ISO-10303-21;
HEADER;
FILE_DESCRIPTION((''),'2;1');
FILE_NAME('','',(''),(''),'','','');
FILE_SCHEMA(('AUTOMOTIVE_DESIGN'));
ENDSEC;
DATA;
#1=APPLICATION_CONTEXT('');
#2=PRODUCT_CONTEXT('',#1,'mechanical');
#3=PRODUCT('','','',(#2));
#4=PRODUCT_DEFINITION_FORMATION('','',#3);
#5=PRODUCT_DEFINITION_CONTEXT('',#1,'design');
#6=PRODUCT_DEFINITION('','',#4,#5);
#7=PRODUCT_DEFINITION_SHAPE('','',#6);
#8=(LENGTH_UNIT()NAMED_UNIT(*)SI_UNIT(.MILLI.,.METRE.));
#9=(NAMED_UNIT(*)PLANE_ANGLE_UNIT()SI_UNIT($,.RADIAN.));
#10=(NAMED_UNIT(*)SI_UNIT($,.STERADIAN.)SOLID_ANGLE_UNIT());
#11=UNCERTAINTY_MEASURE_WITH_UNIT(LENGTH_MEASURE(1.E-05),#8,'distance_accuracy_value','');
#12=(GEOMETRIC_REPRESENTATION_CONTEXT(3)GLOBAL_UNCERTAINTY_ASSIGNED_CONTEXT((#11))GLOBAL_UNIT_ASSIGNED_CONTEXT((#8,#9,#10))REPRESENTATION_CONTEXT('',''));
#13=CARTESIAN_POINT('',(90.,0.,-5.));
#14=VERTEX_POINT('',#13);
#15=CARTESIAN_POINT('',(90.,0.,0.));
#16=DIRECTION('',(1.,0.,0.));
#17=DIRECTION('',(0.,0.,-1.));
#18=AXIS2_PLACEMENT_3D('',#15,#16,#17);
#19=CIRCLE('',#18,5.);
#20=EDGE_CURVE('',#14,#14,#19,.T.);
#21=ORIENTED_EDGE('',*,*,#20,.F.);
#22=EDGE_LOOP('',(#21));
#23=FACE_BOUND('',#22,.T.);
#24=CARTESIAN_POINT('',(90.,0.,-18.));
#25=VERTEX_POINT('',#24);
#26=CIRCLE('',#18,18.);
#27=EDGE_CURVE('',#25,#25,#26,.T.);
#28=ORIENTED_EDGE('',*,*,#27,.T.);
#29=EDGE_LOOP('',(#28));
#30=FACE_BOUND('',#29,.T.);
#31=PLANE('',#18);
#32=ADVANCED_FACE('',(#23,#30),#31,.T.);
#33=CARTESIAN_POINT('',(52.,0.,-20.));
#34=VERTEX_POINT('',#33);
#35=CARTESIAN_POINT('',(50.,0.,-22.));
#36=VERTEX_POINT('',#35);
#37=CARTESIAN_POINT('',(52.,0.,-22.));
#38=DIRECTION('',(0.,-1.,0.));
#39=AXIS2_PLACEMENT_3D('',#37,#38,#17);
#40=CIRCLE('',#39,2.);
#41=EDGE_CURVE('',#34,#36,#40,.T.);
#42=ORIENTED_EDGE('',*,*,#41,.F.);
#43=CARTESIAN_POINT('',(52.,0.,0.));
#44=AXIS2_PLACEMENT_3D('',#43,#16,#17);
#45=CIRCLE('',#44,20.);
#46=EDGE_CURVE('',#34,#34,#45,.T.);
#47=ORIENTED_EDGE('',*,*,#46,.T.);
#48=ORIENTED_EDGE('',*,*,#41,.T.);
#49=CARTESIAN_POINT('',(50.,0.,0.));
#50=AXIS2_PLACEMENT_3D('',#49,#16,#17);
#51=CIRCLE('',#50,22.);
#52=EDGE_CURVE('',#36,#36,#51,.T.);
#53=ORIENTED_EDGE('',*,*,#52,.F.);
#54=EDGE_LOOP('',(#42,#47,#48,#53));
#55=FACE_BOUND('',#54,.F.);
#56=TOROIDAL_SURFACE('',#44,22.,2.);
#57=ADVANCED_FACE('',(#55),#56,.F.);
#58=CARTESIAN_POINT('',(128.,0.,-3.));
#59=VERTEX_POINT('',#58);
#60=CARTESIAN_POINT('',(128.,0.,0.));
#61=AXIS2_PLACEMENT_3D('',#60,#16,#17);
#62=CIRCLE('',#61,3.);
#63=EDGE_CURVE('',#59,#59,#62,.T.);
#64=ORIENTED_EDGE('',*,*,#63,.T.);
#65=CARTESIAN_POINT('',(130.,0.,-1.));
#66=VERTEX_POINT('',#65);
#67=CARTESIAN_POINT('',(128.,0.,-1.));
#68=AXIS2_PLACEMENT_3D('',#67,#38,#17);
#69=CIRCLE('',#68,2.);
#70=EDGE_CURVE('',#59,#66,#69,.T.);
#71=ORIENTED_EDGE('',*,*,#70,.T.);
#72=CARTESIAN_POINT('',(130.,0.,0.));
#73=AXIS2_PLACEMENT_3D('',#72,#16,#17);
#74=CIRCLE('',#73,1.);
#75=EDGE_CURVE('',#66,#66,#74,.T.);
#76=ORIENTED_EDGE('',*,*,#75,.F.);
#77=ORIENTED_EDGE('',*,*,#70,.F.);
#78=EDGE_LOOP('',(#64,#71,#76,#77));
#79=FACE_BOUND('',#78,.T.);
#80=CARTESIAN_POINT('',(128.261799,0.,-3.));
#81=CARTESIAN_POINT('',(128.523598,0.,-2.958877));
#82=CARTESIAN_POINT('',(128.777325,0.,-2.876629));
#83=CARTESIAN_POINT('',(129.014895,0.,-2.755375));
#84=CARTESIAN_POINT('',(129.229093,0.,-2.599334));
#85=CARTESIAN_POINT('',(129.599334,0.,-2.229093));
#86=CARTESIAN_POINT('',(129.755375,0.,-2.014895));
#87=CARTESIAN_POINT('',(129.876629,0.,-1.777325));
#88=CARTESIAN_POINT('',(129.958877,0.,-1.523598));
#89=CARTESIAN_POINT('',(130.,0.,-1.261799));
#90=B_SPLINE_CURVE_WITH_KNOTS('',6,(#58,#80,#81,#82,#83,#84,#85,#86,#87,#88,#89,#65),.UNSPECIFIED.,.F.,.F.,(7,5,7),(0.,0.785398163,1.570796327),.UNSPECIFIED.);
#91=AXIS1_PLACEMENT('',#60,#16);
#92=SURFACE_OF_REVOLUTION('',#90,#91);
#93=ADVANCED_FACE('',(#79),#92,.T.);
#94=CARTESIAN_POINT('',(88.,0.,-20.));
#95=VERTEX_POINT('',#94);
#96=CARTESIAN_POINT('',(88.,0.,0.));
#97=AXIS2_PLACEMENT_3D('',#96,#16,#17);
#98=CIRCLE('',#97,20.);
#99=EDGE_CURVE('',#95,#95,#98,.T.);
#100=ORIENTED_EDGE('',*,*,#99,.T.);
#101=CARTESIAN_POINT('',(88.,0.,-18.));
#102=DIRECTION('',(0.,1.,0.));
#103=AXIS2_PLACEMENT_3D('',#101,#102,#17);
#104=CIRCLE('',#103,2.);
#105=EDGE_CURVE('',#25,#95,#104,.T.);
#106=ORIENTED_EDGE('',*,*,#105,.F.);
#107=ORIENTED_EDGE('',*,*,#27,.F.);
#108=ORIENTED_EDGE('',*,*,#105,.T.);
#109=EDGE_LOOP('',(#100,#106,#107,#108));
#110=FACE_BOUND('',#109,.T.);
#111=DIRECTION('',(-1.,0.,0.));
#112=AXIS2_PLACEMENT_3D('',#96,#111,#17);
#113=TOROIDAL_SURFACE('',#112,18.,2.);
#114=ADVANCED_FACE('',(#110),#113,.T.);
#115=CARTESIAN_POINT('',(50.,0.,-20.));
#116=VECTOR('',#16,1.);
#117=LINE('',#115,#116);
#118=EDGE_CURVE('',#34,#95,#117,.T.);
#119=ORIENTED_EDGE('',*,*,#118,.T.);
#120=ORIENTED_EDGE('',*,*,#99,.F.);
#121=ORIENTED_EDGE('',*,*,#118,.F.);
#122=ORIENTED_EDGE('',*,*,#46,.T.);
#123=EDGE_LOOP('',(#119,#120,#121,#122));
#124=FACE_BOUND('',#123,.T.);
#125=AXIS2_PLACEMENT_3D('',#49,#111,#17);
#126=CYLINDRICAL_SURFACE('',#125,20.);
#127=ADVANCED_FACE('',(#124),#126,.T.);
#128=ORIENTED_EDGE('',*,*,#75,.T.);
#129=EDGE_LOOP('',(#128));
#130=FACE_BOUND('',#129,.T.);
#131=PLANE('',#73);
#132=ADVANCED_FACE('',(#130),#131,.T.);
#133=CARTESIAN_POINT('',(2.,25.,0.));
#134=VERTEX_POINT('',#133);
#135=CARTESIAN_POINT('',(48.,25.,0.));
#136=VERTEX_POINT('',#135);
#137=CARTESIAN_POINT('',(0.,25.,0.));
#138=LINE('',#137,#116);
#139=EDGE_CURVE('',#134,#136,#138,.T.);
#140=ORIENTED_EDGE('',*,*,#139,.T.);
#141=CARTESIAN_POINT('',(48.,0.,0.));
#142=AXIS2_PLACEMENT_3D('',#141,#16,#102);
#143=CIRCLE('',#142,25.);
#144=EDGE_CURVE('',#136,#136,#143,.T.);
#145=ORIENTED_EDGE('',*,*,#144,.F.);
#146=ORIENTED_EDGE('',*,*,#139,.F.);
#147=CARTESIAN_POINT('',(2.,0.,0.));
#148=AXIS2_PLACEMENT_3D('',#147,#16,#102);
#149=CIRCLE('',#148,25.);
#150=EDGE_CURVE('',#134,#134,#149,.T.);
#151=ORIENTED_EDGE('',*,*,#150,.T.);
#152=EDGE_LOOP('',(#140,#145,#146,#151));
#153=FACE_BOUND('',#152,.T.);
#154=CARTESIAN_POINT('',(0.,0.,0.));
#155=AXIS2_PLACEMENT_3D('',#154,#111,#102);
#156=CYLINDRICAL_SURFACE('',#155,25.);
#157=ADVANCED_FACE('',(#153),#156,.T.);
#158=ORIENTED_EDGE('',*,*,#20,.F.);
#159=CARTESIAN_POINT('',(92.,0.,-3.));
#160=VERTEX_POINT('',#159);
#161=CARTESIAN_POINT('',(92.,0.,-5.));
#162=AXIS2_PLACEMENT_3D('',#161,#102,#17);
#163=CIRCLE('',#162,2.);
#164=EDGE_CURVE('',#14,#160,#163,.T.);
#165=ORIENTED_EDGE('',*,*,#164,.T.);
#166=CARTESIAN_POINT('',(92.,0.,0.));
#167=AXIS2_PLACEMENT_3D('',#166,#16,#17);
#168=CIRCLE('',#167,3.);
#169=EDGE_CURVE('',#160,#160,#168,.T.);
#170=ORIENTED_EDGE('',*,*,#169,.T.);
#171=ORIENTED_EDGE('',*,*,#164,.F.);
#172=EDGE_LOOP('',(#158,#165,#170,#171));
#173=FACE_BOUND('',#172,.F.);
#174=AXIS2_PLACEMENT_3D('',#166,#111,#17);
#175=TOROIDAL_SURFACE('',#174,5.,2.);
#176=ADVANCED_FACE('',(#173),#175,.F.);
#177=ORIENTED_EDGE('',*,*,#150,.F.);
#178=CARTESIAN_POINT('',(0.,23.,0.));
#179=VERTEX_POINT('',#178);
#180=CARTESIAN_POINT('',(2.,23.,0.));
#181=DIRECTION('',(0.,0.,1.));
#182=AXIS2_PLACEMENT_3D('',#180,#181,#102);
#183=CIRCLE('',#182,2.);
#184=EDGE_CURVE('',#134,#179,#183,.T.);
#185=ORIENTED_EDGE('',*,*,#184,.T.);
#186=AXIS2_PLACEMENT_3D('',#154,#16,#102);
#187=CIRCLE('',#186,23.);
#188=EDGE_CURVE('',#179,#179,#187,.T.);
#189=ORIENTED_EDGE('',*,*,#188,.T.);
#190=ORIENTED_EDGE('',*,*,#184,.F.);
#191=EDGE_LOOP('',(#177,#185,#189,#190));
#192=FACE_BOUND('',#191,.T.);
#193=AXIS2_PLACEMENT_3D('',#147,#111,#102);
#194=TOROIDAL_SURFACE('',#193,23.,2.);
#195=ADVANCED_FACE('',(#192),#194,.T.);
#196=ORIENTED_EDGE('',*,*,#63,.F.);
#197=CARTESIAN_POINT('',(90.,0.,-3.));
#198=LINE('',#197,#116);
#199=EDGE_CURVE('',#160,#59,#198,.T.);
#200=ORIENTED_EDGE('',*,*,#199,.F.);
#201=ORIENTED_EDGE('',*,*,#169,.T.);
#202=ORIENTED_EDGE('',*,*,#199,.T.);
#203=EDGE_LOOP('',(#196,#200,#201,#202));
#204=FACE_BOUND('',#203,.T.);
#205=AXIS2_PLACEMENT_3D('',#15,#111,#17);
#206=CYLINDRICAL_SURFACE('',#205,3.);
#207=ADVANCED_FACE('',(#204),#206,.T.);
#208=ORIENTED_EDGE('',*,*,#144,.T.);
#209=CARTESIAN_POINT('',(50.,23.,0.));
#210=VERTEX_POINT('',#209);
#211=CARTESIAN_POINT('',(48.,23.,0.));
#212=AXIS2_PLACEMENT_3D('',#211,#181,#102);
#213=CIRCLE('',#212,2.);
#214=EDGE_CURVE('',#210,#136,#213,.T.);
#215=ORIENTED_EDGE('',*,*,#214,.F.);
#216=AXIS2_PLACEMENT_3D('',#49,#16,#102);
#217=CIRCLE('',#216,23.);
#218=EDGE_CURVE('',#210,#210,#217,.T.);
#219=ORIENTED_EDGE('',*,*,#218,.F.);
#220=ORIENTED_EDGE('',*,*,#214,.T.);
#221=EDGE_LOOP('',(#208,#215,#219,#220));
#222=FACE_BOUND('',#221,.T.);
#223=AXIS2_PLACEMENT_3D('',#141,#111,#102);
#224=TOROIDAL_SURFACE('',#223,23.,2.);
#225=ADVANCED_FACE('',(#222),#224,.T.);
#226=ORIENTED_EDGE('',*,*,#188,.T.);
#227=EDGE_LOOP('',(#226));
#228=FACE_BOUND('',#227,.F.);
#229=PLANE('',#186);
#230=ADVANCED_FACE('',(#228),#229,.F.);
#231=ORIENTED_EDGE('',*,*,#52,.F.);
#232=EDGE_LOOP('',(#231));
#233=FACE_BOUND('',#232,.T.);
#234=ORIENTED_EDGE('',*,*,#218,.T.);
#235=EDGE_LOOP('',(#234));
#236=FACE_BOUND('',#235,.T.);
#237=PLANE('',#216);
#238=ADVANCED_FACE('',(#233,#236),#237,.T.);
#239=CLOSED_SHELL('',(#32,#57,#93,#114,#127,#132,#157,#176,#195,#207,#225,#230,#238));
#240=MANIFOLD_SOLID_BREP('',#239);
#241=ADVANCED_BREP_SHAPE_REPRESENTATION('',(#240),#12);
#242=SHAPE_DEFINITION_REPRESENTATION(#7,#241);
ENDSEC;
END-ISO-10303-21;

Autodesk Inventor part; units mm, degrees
ref_plane "YZ Plane" through (0, 0, 0) normal (1, 0, 0) x (0, 1, 0)
ref_plane "XZ Plane" through (0, 0, 0) normal (0, 1, 0) x (-1, 0, 0)
ref_plane "XY Plane" through (0, 0, 0) normal (0, 0, 1) x (1, 0, 0)
sketch "草图1" plane through (0, 0, 0) normal (1, 0, 0) x (0, 1, 0)
  circle A0 centre (0, 0) radius 25
  dimension "d0" = 50
extrude "拉伸1" add sketch "草图1" along normal blind 50
sketch "草图2" plane through (50, 0, 0) normal (1, 0, 0) x (0, 0, -1)
  circle A0 centre (0, 0) radius 20
  dimension "d3" = 40
extrude "拉伸2" add sketch "草图2" along normal blind 40
sketch "草图3" plane through (90, 0, 0) normal (1, 0, 0) x (0, 0, -1)
  circle A0 centre (0, 0) radius 3
  dimension "d6" = 6
extrude "拉伸3" add sketch "草图3" along normal blind 40
fillet "圆角1" radius 2 1 edges at (130, 0, 3)
fillet "圆角2" radius 2 1 edges at (90, 0, 20)
fillet "圆角3" radius 2 2 edges at (50, -25, 0) (0, -25, 0)
fillet "圆角3" radius 2 2 edges at (90, 0, 3) (50, 0, 20)
properties part number "马达"
